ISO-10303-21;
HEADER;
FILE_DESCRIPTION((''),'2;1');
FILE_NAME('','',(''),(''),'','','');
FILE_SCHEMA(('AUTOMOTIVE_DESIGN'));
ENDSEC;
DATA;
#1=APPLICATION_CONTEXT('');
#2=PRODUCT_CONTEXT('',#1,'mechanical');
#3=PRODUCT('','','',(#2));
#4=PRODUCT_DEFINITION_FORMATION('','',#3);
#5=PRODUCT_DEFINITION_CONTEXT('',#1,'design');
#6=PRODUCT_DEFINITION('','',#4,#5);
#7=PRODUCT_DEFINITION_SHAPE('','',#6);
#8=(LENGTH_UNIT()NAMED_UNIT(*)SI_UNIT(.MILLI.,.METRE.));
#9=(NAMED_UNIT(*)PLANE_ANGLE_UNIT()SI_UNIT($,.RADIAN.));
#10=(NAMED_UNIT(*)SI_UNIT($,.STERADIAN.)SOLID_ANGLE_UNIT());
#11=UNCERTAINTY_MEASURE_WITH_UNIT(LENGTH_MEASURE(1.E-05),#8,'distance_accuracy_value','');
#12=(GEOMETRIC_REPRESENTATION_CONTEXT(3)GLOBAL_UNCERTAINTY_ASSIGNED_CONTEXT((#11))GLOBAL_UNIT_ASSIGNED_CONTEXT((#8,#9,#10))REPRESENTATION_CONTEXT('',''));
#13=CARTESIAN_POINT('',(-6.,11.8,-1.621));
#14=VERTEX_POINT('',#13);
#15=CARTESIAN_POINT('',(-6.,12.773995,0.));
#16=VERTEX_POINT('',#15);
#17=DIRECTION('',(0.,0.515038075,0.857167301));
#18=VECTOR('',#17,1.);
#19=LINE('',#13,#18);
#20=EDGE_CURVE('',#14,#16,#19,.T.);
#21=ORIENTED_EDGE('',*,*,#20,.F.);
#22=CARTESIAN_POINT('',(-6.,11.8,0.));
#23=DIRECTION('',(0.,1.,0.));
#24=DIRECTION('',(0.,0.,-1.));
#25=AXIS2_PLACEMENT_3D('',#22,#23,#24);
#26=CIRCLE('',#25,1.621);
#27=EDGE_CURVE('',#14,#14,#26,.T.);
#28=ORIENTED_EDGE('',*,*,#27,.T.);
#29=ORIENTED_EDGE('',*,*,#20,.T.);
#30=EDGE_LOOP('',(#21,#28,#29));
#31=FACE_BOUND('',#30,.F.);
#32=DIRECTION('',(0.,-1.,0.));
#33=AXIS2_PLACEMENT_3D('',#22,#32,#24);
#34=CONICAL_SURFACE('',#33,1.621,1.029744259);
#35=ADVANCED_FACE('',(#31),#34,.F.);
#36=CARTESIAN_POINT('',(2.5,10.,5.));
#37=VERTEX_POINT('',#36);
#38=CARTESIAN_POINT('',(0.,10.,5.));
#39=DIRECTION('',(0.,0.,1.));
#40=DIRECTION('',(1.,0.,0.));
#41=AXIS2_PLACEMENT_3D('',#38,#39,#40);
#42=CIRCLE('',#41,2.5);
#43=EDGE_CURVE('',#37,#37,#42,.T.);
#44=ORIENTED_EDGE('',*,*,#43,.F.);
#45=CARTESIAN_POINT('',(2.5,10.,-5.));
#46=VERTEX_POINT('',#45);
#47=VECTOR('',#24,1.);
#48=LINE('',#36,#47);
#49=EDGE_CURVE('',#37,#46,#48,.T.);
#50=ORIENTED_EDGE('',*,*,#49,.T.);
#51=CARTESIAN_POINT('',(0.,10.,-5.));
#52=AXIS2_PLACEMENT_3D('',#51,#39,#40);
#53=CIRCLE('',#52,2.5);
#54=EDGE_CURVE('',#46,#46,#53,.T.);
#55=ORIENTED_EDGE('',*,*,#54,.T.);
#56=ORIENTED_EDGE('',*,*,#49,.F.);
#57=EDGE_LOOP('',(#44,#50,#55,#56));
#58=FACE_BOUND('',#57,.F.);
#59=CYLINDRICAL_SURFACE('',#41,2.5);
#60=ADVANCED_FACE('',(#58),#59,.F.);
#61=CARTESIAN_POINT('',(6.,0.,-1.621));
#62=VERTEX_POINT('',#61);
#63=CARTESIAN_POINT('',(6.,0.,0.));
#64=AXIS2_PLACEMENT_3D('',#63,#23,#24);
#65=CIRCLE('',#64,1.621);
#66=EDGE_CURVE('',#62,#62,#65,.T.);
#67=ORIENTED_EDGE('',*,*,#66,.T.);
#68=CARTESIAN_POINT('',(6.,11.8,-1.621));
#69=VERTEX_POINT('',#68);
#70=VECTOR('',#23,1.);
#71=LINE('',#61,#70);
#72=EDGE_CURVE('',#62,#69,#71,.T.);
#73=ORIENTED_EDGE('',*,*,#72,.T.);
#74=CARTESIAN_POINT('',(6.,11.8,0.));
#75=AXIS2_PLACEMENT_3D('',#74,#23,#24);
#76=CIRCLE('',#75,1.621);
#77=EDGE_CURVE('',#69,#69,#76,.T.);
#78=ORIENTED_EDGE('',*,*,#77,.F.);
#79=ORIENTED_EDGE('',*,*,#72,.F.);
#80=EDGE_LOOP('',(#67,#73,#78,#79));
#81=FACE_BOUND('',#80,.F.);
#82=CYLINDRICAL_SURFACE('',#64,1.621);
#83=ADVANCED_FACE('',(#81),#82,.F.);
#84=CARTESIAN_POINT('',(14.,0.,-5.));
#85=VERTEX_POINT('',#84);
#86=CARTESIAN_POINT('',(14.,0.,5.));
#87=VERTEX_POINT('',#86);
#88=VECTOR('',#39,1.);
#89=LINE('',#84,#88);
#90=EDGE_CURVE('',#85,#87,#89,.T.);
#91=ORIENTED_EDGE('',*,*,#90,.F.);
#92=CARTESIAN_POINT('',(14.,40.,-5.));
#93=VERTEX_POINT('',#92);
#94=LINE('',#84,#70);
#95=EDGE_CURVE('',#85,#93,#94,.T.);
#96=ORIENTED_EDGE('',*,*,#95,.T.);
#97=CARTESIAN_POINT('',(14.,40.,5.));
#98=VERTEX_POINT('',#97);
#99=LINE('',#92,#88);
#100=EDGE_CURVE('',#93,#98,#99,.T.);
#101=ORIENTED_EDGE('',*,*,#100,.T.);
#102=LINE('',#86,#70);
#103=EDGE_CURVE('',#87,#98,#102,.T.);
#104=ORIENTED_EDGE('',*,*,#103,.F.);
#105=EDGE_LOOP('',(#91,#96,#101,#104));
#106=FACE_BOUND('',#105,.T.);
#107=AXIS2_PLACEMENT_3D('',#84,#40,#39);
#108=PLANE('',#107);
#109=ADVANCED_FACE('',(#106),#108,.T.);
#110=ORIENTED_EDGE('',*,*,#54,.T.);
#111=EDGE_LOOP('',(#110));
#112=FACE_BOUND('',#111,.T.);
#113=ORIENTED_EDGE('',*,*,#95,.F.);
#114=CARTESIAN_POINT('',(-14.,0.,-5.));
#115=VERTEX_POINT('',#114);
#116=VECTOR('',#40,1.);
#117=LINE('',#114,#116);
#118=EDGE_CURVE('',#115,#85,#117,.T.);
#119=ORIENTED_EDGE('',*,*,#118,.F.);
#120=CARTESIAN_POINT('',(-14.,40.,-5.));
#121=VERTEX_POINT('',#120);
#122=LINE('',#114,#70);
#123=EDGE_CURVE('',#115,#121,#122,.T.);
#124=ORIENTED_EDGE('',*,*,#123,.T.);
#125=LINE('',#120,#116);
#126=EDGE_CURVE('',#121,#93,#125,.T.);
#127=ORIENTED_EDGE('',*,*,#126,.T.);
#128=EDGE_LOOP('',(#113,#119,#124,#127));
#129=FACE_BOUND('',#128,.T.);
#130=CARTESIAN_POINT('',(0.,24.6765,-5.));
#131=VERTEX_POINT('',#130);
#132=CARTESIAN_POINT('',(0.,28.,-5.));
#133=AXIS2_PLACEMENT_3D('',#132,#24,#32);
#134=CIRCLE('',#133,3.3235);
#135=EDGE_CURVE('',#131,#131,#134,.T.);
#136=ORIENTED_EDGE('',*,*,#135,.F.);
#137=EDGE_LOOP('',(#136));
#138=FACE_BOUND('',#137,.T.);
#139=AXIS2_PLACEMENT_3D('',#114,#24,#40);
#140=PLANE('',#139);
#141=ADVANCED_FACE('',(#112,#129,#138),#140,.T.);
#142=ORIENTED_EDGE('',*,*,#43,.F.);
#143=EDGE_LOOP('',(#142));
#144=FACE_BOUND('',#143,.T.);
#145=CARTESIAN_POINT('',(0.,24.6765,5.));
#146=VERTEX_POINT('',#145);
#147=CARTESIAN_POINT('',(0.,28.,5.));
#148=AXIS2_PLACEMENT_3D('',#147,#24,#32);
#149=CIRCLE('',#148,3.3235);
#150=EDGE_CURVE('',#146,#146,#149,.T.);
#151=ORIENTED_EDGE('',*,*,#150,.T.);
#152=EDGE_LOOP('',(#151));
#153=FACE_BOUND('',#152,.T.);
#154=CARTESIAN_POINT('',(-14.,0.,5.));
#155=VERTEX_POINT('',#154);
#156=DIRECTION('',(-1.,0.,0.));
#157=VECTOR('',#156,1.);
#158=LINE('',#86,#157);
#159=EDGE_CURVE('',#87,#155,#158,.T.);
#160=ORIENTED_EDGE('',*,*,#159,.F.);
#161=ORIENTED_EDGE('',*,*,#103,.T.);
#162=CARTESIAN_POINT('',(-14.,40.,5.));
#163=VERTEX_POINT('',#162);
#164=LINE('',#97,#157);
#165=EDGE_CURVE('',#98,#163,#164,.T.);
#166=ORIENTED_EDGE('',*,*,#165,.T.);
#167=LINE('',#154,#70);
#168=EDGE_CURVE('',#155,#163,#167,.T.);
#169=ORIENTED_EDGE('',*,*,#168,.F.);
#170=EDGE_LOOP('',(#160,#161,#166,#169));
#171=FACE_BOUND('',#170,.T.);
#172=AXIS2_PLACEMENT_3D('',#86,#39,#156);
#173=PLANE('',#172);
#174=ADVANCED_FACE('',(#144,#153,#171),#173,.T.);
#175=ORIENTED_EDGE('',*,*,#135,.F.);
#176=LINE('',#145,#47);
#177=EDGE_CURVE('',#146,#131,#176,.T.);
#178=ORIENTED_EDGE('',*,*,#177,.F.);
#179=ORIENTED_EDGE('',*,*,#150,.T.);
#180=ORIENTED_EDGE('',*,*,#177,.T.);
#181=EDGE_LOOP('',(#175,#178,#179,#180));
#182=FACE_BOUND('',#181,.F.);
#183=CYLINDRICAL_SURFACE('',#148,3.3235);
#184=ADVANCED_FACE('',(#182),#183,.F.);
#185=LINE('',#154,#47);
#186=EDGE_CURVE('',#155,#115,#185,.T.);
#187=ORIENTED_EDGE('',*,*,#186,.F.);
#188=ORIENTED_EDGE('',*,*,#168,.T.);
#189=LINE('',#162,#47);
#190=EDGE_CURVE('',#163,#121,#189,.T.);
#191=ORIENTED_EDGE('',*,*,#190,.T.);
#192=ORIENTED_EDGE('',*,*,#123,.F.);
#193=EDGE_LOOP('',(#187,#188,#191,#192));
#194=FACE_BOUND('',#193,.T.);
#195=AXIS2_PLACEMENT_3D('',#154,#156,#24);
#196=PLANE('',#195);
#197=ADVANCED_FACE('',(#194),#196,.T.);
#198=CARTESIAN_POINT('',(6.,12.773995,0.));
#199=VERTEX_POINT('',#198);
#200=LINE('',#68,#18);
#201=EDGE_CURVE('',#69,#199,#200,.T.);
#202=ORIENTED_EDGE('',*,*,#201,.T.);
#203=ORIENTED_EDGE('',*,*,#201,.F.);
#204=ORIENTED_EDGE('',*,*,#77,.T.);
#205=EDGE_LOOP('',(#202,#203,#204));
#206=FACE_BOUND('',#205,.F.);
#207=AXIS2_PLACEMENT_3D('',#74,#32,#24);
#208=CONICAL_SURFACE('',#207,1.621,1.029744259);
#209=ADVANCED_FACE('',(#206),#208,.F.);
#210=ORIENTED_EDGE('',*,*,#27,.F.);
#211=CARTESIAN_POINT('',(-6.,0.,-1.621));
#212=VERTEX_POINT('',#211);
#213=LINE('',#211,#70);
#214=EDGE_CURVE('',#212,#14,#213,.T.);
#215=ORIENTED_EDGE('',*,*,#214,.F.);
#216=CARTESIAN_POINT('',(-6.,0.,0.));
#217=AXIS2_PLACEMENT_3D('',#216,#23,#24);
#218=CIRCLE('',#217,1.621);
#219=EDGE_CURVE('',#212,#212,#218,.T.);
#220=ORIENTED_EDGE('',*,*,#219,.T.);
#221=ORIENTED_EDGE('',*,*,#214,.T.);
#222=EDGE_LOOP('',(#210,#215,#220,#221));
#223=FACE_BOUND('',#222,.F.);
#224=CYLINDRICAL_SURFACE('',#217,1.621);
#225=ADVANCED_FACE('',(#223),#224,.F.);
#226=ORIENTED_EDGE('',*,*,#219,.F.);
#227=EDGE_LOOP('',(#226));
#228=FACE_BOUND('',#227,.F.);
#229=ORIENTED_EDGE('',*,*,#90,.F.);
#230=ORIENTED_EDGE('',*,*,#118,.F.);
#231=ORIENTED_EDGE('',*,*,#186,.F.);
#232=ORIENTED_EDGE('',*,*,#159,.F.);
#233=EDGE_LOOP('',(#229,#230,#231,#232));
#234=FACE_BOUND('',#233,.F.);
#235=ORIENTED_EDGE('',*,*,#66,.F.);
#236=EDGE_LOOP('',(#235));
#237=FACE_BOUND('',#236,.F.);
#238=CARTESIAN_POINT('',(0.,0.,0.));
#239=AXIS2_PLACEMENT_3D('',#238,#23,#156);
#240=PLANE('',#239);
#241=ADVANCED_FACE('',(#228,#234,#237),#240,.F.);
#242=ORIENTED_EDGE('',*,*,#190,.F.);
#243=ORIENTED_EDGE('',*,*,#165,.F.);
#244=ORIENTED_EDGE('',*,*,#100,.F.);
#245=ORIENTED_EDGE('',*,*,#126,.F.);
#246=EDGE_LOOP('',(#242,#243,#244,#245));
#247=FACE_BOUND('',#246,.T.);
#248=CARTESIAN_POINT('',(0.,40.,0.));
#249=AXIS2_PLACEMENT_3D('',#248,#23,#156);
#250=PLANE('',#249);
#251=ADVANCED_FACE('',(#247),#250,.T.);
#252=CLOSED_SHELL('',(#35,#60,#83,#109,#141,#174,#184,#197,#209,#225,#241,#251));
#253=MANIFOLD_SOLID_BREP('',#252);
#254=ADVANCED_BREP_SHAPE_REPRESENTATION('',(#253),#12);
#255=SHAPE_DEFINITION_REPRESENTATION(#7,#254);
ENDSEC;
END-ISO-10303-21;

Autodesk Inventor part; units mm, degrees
ref_plane "YZ Plane" through (0, 0, 0) normal (1, 0, 0) x (0, 1, 0)
ref_plane "XZ Plane" through (0, 0, 0) normal (0, 1, 0) x (-1, 0, 0)
ref_plane "XY Plane" through (0, 0, 0) normal (0, 0, 1) x (1, 0, 0)
sketch "Boceto1" plane through (0, 0, 0) normal (0, 1, 0) x (-1, 0, 0)
  line L0 (14, -5) -> (-14, -5)
  line L1 (-14, -5) -> (-14, 5)
  line L2 (-14, 5) -> (14, 5)
  line L3 (14, 5) -> (14, -5)
  point P0 (0, 0)
  point P1 (0, -5)
  point P2 (-14, 0)
  dimension "d0" = 28
  dimension "d1" = 10
extrude "Extrusión1" add sketch "Boceto1" along normal blind 40
sketch "Boceto2" plane through (0, 0, 0) normal (0, -1, 0) x (1, 0, 0)
  point P0 (0, 0)
  point P1 (6, 0)
  point P2 (-6, 0)
  dimension "d19" = 12
  dimension "d20" = 6
hole "Agujero1" at (6, 0, 0) at (-6, 0, 0) direction (0, 1, 0) diameter 3.242 depth 11.8 tip angle 118 thread size "M4x0.7" class "6H" standard "ANSI Metric M Profile"
sketch "Boceto3" plane through (-14, 0, 5) normal (0, 0, 1) x (1, 0, 0)
  line L0 (0, 0) -> (28, 0) projected
  point P0 (14, 0)
  point P1 (14, 28)
  point P2 (14, 0)
  dimension "d11" = 28
hole "Agujero2" at (0, 28, 5) direction (0, 0, -1) diameter 6.647 end through all thread size "M8x1.25" class "6H" standard "ANSI Metric M Profile"
sketch "Boceto4" plane through (-14, 0, 5) normal (0, 0, 1) x (1, 0, 0)
  circle A0 centre (14, 10) radius 2.5
  line L0 (0, 0) -> (28, 0) projected
  point P0 (14, 0)
  point P1 (14, 0)
  dimension "d21" = 5
  dimension "d22" = 10
extrude "Extrusión2" cut sketch "Boceto4" against normal blind 10
equation "\"d20\" = 0.5 * d19"
properties part number "Guia sujecion centellador"
